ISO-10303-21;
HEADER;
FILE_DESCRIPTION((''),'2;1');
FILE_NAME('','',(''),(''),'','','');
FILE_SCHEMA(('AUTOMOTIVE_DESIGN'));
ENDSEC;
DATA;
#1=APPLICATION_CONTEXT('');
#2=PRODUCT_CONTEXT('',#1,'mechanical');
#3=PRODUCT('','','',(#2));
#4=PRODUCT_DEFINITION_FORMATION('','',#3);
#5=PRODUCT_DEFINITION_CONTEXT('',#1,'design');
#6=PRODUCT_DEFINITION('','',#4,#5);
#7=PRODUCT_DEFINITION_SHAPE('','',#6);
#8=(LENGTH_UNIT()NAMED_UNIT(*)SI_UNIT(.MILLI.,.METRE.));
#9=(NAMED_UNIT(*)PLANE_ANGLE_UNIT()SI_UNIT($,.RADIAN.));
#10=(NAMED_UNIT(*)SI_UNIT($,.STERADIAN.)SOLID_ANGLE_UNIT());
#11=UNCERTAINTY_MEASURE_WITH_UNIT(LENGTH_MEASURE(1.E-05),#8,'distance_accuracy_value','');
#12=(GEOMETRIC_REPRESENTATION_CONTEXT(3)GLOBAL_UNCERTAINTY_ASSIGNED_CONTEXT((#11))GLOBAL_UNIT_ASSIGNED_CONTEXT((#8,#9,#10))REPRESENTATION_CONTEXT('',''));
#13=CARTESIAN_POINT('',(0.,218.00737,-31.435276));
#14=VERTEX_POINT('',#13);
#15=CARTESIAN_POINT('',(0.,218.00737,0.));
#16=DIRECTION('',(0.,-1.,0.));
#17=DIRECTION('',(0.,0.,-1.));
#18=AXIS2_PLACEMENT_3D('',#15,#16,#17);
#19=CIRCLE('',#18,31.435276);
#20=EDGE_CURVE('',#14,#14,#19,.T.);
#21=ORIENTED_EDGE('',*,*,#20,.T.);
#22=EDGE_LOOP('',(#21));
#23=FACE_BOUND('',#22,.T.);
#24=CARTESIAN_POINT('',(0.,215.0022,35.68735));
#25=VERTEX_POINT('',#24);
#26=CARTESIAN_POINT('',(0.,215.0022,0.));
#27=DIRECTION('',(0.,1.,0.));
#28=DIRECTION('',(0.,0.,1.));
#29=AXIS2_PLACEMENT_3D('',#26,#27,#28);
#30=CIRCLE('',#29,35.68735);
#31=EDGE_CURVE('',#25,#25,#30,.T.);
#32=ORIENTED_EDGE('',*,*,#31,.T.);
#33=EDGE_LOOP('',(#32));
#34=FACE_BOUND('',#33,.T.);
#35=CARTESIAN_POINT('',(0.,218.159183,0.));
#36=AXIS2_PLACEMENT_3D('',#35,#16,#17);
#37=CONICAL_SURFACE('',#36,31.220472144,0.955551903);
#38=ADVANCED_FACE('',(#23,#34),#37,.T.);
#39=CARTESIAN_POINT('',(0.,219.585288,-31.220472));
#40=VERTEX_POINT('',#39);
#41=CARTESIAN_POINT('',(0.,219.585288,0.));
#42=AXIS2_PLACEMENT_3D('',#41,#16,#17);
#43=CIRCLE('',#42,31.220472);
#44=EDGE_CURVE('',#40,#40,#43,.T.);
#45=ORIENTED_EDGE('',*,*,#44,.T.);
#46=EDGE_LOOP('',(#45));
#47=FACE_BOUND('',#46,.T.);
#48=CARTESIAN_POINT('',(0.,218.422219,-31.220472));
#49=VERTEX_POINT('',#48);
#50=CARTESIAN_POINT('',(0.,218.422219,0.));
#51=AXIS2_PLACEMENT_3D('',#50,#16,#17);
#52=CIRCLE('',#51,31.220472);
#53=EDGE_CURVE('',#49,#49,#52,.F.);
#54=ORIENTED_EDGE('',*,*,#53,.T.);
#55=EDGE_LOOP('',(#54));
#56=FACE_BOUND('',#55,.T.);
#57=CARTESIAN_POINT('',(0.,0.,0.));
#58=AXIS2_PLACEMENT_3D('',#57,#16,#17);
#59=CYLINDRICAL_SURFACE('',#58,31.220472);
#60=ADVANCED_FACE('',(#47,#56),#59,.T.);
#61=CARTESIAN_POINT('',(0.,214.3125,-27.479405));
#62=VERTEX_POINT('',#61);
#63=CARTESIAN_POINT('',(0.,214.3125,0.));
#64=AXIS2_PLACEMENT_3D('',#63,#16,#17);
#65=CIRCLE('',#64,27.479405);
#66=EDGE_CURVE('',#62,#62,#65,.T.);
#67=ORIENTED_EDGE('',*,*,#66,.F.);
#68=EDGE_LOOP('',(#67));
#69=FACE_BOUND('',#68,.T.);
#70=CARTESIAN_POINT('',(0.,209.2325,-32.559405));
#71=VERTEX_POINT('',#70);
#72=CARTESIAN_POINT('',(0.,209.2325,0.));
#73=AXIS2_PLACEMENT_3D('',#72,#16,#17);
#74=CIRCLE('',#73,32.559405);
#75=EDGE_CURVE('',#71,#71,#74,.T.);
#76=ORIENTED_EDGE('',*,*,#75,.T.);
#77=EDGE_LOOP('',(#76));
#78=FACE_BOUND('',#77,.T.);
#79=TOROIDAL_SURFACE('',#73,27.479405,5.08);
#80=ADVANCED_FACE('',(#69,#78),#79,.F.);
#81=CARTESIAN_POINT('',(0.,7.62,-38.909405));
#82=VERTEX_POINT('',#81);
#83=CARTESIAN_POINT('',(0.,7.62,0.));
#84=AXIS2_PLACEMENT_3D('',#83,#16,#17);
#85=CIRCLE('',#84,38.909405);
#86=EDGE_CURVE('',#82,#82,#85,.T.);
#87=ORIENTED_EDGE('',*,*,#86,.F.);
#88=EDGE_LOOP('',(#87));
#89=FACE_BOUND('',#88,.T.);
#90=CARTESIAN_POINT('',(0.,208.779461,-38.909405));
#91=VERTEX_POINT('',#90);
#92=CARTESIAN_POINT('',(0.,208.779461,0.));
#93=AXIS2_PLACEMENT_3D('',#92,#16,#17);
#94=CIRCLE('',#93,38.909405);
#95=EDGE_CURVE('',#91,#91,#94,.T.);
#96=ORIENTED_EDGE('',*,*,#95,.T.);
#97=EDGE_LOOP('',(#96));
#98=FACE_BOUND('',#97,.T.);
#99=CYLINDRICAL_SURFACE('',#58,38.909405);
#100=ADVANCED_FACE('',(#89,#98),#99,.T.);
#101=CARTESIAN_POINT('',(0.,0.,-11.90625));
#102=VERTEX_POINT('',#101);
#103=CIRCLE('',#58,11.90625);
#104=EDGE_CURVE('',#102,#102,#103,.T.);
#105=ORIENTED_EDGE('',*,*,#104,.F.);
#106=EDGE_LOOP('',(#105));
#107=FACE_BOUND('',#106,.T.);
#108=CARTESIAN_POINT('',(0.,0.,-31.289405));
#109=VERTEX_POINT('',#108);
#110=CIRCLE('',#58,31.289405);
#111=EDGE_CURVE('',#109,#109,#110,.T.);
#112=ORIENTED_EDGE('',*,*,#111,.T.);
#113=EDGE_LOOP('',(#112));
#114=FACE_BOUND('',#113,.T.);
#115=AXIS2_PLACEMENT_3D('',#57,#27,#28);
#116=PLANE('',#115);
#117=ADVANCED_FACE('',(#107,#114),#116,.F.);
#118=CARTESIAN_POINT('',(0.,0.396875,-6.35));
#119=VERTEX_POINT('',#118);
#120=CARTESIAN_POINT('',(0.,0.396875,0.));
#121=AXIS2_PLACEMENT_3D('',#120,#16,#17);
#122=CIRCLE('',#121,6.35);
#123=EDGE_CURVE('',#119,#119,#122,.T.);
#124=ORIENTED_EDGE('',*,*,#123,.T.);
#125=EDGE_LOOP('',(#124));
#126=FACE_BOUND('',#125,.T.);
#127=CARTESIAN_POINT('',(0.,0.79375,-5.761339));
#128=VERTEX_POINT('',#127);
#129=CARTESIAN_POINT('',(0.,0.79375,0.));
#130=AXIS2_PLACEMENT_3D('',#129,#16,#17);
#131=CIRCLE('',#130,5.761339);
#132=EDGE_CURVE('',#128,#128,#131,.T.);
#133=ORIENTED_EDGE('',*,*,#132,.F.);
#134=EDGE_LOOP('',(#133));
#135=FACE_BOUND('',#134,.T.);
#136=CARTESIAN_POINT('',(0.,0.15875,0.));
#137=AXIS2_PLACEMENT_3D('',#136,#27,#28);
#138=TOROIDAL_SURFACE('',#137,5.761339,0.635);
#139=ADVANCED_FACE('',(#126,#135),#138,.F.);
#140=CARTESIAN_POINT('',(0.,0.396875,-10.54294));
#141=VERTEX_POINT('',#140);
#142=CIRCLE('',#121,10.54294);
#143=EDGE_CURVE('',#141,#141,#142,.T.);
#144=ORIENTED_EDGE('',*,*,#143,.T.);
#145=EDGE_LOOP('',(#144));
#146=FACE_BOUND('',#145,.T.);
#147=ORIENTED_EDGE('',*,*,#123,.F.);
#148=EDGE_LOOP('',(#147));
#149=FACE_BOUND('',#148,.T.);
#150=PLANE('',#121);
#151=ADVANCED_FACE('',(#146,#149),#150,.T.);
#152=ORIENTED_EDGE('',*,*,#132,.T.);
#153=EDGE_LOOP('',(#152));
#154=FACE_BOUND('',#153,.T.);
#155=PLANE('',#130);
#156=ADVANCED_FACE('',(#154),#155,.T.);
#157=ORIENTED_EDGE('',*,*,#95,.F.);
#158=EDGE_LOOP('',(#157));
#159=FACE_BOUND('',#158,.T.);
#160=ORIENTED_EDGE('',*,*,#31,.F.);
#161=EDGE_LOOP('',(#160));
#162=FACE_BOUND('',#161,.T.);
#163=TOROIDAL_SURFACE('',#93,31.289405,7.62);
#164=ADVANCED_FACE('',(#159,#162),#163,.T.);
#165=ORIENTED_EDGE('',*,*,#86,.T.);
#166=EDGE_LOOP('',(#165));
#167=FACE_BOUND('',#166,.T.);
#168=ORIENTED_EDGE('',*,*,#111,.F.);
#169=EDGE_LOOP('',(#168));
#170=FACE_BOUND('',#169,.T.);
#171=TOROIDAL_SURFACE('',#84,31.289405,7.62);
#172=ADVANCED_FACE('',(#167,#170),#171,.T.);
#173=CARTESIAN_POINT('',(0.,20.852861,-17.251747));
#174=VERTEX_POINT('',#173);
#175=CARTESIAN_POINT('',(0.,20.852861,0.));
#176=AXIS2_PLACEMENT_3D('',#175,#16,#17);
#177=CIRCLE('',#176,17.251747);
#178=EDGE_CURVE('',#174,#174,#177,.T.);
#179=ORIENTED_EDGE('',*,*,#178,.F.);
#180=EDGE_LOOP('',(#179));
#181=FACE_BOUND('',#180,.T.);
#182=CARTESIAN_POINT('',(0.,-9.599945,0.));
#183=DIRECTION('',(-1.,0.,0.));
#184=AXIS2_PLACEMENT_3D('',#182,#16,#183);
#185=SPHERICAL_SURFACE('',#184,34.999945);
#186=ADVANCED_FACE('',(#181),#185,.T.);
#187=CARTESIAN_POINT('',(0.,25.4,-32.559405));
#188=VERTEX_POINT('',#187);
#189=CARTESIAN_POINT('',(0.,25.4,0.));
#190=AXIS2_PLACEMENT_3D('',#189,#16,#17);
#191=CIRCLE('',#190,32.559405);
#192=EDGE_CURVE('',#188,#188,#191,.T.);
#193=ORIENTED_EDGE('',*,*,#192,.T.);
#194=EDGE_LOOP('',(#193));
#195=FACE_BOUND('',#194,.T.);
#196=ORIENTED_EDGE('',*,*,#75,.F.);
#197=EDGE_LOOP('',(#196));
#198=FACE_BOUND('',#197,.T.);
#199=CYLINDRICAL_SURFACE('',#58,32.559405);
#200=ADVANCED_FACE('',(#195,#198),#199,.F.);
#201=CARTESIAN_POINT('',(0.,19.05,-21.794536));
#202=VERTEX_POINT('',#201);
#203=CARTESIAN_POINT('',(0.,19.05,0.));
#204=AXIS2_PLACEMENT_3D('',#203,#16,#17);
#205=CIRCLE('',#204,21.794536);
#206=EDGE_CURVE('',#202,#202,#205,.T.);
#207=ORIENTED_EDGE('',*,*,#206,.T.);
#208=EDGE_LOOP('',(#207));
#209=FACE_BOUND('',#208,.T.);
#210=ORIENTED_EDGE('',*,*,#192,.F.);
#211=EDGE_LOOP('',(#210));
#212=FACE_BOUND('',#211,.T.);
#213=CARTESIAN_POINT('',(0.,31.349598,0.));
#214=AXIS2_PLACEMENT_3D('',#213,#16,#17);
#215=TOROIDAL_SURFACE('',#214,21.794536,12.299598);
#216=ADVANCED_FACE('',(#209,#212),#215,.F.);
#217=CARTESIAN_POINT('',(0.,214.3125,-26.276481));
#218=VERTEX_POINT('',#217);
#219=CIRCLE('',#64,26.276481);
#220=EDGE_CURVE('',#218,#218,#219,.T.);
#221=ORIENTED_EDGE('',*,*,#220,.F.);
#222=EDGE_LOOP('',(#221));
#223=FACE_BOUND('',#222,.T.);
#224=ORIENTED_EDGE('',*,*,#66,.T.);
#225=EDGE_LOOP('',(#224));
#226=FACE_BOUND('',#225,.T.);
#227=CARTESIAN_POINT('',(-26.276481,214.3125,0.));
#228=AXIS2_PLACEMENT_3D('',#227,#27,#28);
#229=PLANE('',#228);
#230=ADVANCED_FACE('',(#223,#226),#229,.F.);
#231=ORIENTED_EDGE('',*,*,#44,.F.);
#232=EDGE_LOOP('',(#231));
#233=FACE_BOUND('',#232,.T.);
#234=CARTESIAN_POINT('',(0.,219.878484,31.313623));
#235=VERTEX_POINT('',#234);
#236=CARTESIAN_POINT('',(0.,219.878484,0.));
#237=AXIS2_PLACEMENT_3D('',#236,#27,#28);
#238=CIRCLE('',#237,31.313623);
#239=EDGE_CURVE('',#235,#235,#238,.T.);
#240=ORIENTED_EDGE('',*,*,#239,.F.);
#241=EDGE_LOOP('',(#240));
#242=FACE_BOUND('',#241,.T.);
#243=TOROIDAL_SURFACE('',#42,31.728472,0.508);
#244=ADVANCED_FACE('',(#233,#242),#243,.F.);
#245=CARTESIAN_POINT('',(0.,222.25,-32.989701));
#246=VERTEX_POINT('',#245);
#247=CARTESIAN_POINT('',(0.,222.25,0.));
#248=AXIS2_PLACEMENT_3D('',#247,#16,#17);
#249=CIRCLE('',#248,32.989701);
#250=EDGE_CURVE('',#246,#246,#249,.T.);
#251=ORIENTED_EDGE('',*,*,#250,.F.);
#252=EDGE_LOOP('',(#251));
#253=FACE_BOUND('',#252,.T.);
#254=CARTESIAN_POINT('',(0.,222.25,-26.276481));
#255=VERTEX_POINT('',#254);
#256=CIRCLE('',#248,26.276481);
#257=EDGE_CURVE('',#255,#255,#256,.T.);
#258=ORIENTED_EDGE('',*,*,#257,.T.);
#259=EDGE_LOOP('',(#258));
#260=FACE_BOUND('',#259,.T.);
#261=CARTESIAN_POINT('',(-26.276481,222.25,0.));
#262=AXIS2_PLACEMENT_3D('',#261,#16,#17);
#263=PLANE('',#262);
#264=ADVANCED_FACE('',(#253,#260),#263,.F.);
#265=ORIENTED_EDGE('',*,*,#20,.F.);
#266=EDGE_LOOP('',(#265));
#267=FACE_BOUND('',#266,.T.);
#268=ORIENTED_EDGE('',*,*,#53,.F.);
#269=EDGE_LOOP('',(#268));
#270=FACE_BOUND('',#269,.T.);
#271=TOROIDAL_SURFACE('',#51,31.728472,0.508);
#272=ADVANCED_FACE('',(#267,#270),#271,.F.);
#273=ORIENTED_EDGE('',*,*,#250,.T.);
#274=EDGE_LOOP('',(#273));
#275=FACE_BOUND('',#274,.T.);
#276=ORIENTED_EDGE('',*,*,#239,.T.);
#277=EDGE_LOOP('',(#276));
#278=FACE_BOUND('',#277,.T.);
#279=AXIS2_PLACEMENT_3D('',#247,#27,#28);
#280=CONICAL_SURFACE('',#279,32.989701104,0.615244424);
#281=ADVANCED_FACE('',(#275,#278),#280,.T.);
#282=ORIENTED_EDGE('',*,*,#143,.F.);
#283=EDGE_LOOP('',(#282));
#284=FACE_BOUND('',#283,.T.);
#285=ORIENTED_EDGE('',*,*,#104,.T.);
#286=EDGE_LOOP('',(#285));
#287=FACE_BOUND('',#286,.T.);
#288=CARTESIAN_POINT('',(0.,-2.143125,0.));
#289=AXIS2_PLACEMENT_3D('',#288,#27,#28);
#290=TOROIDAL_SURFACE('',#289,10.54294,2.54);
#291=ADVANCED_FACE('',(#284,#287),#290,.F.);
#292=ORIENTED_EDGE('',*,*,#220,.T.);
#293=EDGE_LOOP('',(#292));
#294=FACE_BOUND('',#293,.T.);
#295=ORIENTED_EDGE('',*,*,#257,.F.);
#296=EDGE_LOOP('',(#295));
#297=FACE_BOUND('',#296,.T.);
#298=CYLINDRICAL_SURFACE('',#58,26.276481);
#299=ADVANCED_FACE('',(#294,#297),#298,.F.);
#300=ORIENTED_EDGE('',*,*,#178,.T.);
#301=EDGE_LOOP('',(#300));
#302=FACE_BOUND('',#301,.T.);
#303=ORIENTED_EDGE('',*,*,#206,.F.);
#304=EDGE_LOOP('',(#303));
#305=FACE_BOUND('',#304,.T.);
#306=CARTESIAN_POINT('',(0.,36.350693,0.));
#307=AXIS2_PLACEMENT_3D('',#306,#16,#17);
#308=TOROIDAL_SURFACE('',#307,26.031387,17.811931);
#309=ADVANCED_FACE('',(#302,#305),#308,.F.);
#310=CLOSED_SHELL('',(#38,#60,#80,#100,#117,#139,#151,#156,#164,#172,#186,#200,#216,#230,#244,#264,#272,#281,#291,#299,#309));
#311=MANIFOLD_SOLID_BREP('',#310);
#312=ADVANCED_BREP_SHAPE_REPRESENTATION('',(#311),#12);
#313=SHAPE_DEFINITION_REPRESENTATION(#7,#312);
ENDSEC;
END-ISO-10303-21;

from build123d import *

# Parameters (mm, degrees)
FILLET3_R          = 7.62
FILLET7_R          = 0.508
SKETCH8_R          = 11.90625
CUT_EXTRUDE1_DEPTH = 0.396875
FILLET1_R          = 2.54
SKETCH9_R          = 6.35
CUT_EXTRUDE2_DEPTH = 0.396875
FILLET2_R          = 0.635


# Read off the part's stored shape, not the designer's step: Revolve1
with BuildPart() as part:
    # Revolve1 outline → Revolve1 (revolve)
    with BuildSketch(Plane.XY):
        with BuildLine():
            Line((0, 25.4), (0, 0))
            Line((0, 0), (31.289404712, 0))
            ThreePointArc((31.289404712, 0), (36.677558385, 2.231846327), (38.909404712, 7.62))
            Line((38.909404712, 7.62), (38.909404712, 212.725))
            Line((38.909404712, 212.725), (31.220472144, 218.159183173))
            Line((31.220472144, 218.159183173), (31.220472144, 219.746683173))
            Line((31.220472144, 219.746683173), (32.989701104, 222.25))
            Line((32.989701104, 222.25), (26.276481104, 222.25))
            Line((26.276481104, 222.25), (26.276481104, 214.3125))
            Line((26.276481104, 214.3125), (27.479404712, 214.3125))
            ThreePointArc((27.479404712, 214.3125), (31.071507161, 212.824602449), (32.559404712, 209.2325))
            Line((32.559404712, 209.2325), (32.559404712, 25.4))
            ThreePointArc((32.559404712, 25.4), (28.043634012, 20.755784366), (21.794536191, 19.05))
            ThreePointArc((21.794536191, 19.05), (19.461011381, 19.794876886), (17.251746885, 20.852860816))
            ThreePointArc((17.251746885, 20.852860816), (8.920471492, 24.244128913), (0, 25.4))
        make_face()
    revolve(axis=Axis((0, 0, 0), (0, 1, 0)))

    # Fillet3
    fillet3_edges = [part.edges().sort_by_distance(p)[0] for p in [
        (-38.909404712, 212.725, 0),
    ]]
    fillet(fillet3_edges, radius=FILLET3_R)

    # Fillet7
    fillet7_edges = [part.edges().sort_by_distance(p)[0] for p in [
        (-31.220472144, 219.746683173, 0),
        (-31.220472144, 218.159183173, 0),
    ]]
    fillet(fillet7_edges, radius=FILLET7_R)

    # Sketch8 → Cut-Extrude1 (cut)
    with BuildSketch(Plane.XZ):
        with Locations(Location((0, 0, 0), (0, 0, 270))):
            Circle(SKETCH8_R)
    extrude(amount=-CUT_EXTRUDE1_DEPTH, mode=Mode.SUBTRACT)

    # Fillet1
    # the kernel refuses this fillet: 2.54 mm, written as the material it adds along each edge
    with BuildSketch(Plane(origin=(0, 0.396875, 0), x_dir=(0, 0, -1), z_dir=(-1, 0, 0))) as fillet1_piece_1:
        with BuildLine():
            CenterArc((10.542939605, 2.54), FILLET1_R, 270, 32.461744967)
            Line((10.542939605, 0), (10.542939605, -0.0508))
            Line((10.542939605, -0.0508), (11.90625, -0.0508))
            Line((11.90625, -0.0508), (11.95705, 0))
            ThreePointArc((11.95705, 0), (11.95705, 0.1984375), (11.933516208, 0.3540125))
            Line((11.933516208, 0.3540125), (11.90625, 0.396875))
        make_face()
    revolve(axis=Axis((0, 0.396875, 0), (0, -1, 0)))

    # Sketch9 → Cut-Extrude2 (cut)
    with BuildSketch(Plane.XZ.offset(-0.396875)):
        with Locations(Location((0, 0, 0), (0, 0, 270))):
            Circle(SKETCH9_R)
    extrude(amount=-CUT_EXTRUDE2_DEPTH, mode=Mode.SUBTRACT)

    # Fillet2
    # the kernel refuses this fillet: 0.635 mm, written as the material it adds along each edge
    with BuildSketch(Plane(origin=(0, 0.79375, 0), x_dir=(0, 0, -1), z_dir=(-1, 0, 0))) as fillet2_piece_1:
        with BuildLine():
            CenterArc((5.761339245, 0.635), FILLET2_R, 270, 67.975687163)
            Line((5.761339245, 0), (5.761339245, -0.0127))
            Line((5.761339245, -0.0127), (6.35, -0.0127))
            Line((6.35, -0.0127), (6.3627, 0))
            ThreePointArc((6.3627, 0), (6.3627, 0.1984375), (6.361773215, 0.3921125))
            Line((6.361773215, 0.3921125), (6.35, 0.396875))
        make_face()
    revolve(axis=Axis((0, 0.79375, 0), (0, -1, 0)))


solid = part.part
